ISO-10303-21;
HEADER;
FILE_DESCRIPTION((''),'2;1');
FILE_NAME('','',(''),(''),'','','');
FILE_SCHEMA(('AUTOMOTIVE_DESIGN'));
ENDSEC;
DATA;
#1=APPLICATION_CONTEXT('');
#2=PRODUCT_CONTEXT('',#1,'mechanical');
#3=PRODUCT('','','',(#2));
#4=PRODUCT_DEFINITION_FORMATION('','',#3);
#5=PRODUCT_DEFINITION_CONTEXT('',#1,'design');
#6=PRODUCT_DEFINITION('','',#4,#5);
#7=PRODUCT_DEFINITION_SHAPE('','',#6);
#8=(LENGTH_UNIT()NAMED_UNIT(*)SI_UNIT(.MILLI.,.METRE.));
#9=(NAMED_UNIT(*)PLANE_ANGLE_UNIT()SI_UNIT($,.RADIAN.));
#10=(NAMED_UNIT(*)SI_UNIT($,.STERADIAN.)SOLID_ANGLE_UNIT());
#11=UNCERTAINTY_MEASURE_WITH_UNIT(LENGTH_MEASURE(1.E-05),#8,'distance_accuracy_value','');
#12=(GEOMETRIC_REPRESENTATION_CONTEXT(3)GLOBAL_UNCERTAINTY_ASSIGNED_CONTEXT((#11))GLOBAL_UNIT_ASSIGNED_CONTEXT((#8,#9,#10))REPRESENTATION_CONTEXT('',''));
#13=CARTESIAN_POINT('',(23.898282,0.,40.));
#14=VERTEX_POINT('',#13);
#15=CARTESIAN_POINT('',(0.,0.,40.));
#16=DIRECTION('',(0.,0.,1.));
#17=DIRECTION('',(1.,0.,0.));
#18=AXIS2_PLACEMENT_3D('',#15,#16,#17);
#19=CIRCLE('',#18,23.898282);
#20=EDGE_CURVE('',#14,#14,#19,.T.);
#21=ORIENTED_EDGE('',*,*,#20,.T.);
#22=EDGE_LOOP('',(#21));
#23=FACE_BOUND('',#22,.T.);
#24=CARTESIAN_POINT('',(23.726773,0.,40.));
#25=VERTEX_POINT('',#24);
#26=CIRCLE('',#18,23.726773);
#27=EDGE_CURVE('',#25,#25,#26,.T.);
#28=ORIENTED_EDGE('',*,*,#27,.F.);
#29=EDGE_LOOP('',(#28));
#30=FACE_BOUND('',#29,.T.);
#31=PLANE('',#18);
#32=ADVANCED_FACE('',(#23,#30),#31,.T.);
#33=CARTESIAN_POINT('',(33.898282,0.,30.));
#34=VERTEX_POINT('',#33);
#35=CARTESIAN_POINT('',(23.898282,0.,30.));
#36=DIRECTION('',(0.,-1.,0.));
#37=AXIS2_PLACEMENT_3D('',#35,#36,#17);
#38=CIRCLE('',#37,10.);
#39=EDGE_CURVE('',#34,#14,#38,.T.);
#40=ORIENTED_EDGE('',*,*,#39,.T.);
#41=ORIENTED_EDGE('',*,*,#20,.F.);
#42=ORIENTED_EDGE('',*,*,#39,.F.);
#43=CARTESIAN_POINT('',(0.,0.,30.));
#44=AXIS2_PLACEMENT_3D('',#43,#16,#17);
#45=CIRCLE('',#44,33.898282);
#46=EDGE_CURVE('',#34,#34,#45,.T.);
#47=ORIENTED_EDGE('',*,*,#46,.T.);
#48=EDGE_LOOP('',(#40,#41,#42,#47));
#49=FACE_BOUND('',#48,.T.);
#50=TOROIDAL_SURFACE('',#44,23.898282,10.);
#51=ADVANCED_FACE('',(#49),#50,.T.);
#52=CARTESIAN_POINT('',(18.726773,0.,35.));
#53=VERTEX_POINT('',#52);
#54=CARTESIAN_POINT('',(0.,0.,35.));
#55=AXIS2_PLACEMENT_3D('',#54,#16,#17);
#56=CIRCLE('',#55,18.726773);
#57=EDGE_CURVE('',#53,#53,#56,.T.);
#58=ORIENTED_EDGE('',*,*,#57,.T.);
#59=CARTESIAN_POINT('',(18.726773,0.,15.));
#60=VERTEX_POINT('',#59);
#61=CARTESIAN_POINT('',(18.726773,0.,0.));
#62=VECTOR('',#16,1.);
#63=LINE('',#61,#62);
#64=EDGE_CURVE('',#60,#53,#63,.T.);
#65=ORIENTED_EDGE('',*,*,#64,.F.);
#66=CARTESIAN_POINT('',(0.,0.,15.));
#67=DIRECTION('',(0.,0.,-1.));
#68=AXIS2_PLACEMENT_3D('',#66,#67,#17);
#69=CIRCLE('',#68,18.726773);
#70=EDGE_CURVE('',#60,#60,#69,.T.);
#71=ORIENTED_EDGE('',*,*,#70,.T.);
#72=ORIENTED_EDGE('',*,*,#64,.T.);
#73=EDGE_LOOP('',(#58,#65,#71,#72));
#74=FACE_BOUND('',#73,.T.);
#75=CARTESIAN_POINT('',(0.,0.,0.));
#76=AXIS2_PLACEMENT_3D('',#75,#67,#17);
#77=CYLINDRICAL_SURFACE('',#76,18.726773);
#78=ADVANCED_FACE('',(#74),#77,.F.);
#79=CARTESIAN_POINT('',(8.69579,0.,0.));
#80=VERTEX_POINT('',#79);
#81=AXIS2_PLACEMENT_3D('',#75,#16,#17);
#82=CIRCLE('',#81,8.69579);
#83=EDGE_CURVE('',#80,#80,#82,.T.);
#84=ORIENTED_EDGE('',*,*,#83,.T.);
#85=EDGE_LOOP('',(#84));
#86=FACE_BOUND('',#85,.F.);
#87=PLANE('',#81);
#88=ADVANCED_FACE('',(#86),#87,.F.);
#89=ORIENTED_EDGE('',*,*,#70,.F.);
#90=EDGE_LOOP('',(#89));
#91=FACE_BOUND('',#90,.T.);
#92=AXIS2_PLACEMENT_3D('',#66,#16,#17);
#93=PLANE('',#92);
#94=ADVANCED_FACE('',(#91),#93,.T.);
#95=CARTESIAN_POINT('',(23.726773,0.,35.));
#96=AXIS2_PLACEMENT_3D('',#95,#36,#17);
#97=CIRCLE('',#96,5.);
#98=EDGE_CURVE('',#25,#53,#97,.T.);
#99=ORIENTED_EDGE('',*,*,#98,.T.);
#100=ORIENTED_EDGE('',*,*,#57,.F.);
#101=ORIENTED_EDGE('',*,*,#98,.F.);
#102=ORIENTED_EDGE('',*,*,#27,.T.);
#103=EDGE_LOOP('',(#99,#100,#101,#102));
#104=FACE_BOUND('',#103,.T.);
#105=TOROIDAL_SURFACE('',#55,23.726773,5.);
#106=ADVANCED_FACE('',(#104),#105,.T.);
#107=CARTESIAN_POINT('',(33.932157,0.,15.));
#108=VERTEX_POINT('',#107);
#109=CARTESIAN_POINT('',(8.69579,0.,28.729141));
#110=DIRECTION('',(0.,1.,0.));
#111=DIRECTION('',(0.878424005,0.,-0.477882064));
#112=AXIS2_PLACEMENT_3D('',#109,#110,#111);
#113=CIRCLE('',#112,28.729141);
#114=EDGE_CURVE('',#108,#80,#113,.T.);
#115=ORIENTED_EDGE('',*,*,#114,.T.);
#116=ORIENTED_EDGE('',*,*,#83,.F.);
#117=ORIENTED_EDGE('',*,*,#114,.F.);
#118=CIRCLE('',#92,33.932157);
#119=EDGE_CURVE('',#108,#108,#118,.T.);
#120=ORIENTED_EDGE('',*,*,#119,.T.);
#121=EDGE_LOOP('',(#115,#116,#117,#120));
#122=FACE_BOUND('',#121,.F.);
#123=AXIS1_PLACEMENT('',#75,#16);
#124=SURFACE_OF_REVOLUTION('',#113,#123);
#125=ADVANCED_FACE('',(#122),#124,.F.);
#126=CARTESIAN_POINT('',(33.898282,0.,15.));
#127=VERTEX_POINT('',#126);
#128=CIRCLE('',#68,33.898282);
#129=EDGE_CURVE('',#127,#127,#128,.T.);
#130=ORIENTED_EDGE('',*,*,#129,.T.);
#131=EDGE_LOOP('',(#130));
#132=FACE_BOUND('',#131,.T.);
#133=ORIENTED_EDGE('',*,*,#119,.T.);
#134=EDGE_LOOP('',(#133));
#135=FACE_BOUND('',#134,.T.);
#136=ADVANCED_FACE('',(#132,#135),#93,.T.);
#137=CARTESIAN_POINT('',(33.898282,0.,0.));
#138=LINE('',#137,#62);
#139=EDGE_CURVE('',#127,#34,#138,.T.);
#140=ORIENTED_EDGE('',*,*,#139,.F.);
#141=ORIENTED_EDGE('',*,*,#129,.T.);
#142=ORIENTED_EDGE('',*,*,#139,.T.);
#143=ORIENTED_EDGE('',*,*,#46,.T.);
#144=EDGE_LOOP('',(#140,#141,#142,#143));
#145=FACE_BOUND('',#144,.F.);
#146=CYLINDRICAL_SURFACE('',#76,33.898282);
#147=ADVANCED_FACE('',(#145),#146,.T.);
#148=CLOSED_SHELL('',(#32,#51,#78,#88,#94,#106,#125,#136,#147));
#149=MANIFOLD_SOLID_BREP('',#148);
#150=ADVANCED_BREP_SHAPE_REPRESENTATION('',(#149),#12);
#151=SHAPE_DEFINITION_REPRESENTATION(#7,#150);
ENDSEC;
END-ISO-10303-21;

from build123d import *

# Parameters (mm, degrees)
F0_R     = 33.8982818127
F0_R_2   = 18.7267733827
F1_DEPTH = 40
F2_R     = 33.9321571181
F3_DEPTH = 15
F4_R     = 10
F5_R     = 5


# Not quite as in the source:
# - a fillet or chamfer that OpenCascade refuses, or shapes differently, is made with other operations: its cross-section is extruded or revolved along the edge and cut away or added


with BuildPart() as f1:
    # F0 (on Top) → F1 (new body)
    with BuildSketch(Plane.XY):
        Circle(F0_R)
        Circle(F0_R_2, mode=Mode.SUBTRACT)
    extrude(amount=F1_DEPTH)

    # F2 (on Top) → F3 (join)
    with BuildSketch(Plane.XY):
        Circle(F2_R)
    extrude(amount=F3_DEPTH)

    # F4
    f4_edges = [f1.edges().sort_by_distance(p)[0] for p in [
        (-33.898282, 0, 40),
    ]]
    fillet(f4_edges, radius=F4_R)

    # F5
    f5_edges = [f1.edges().sort_by_distance(p)[0] for p in [
        (-18.726773, 0, 40),
    ]]
    fillet(f5_edges, radius=F5_R)

    # F6: fillet of radius 28.7291413922 on 1 edges, made by hand

    # F6_s1 → F6_t2 (revolve, cut)
    with BuildSketch(Plane.XZ):
        with BuildLine():
            ThreePointArc((33.9321571181, 15), (23.3746370554, 4.0330889811), (8.6957896741, 0))
            Line((8.6957896741, 0), (33.9321571181, 0))
            Line((33.9321571181, 0), (33.9321571181, 15))
        make_face()
    revolve(axis=Axis((0, 0, 0), (0, 0, 1)), mode=Mode.SUBTRACT)


solid = f1.part
